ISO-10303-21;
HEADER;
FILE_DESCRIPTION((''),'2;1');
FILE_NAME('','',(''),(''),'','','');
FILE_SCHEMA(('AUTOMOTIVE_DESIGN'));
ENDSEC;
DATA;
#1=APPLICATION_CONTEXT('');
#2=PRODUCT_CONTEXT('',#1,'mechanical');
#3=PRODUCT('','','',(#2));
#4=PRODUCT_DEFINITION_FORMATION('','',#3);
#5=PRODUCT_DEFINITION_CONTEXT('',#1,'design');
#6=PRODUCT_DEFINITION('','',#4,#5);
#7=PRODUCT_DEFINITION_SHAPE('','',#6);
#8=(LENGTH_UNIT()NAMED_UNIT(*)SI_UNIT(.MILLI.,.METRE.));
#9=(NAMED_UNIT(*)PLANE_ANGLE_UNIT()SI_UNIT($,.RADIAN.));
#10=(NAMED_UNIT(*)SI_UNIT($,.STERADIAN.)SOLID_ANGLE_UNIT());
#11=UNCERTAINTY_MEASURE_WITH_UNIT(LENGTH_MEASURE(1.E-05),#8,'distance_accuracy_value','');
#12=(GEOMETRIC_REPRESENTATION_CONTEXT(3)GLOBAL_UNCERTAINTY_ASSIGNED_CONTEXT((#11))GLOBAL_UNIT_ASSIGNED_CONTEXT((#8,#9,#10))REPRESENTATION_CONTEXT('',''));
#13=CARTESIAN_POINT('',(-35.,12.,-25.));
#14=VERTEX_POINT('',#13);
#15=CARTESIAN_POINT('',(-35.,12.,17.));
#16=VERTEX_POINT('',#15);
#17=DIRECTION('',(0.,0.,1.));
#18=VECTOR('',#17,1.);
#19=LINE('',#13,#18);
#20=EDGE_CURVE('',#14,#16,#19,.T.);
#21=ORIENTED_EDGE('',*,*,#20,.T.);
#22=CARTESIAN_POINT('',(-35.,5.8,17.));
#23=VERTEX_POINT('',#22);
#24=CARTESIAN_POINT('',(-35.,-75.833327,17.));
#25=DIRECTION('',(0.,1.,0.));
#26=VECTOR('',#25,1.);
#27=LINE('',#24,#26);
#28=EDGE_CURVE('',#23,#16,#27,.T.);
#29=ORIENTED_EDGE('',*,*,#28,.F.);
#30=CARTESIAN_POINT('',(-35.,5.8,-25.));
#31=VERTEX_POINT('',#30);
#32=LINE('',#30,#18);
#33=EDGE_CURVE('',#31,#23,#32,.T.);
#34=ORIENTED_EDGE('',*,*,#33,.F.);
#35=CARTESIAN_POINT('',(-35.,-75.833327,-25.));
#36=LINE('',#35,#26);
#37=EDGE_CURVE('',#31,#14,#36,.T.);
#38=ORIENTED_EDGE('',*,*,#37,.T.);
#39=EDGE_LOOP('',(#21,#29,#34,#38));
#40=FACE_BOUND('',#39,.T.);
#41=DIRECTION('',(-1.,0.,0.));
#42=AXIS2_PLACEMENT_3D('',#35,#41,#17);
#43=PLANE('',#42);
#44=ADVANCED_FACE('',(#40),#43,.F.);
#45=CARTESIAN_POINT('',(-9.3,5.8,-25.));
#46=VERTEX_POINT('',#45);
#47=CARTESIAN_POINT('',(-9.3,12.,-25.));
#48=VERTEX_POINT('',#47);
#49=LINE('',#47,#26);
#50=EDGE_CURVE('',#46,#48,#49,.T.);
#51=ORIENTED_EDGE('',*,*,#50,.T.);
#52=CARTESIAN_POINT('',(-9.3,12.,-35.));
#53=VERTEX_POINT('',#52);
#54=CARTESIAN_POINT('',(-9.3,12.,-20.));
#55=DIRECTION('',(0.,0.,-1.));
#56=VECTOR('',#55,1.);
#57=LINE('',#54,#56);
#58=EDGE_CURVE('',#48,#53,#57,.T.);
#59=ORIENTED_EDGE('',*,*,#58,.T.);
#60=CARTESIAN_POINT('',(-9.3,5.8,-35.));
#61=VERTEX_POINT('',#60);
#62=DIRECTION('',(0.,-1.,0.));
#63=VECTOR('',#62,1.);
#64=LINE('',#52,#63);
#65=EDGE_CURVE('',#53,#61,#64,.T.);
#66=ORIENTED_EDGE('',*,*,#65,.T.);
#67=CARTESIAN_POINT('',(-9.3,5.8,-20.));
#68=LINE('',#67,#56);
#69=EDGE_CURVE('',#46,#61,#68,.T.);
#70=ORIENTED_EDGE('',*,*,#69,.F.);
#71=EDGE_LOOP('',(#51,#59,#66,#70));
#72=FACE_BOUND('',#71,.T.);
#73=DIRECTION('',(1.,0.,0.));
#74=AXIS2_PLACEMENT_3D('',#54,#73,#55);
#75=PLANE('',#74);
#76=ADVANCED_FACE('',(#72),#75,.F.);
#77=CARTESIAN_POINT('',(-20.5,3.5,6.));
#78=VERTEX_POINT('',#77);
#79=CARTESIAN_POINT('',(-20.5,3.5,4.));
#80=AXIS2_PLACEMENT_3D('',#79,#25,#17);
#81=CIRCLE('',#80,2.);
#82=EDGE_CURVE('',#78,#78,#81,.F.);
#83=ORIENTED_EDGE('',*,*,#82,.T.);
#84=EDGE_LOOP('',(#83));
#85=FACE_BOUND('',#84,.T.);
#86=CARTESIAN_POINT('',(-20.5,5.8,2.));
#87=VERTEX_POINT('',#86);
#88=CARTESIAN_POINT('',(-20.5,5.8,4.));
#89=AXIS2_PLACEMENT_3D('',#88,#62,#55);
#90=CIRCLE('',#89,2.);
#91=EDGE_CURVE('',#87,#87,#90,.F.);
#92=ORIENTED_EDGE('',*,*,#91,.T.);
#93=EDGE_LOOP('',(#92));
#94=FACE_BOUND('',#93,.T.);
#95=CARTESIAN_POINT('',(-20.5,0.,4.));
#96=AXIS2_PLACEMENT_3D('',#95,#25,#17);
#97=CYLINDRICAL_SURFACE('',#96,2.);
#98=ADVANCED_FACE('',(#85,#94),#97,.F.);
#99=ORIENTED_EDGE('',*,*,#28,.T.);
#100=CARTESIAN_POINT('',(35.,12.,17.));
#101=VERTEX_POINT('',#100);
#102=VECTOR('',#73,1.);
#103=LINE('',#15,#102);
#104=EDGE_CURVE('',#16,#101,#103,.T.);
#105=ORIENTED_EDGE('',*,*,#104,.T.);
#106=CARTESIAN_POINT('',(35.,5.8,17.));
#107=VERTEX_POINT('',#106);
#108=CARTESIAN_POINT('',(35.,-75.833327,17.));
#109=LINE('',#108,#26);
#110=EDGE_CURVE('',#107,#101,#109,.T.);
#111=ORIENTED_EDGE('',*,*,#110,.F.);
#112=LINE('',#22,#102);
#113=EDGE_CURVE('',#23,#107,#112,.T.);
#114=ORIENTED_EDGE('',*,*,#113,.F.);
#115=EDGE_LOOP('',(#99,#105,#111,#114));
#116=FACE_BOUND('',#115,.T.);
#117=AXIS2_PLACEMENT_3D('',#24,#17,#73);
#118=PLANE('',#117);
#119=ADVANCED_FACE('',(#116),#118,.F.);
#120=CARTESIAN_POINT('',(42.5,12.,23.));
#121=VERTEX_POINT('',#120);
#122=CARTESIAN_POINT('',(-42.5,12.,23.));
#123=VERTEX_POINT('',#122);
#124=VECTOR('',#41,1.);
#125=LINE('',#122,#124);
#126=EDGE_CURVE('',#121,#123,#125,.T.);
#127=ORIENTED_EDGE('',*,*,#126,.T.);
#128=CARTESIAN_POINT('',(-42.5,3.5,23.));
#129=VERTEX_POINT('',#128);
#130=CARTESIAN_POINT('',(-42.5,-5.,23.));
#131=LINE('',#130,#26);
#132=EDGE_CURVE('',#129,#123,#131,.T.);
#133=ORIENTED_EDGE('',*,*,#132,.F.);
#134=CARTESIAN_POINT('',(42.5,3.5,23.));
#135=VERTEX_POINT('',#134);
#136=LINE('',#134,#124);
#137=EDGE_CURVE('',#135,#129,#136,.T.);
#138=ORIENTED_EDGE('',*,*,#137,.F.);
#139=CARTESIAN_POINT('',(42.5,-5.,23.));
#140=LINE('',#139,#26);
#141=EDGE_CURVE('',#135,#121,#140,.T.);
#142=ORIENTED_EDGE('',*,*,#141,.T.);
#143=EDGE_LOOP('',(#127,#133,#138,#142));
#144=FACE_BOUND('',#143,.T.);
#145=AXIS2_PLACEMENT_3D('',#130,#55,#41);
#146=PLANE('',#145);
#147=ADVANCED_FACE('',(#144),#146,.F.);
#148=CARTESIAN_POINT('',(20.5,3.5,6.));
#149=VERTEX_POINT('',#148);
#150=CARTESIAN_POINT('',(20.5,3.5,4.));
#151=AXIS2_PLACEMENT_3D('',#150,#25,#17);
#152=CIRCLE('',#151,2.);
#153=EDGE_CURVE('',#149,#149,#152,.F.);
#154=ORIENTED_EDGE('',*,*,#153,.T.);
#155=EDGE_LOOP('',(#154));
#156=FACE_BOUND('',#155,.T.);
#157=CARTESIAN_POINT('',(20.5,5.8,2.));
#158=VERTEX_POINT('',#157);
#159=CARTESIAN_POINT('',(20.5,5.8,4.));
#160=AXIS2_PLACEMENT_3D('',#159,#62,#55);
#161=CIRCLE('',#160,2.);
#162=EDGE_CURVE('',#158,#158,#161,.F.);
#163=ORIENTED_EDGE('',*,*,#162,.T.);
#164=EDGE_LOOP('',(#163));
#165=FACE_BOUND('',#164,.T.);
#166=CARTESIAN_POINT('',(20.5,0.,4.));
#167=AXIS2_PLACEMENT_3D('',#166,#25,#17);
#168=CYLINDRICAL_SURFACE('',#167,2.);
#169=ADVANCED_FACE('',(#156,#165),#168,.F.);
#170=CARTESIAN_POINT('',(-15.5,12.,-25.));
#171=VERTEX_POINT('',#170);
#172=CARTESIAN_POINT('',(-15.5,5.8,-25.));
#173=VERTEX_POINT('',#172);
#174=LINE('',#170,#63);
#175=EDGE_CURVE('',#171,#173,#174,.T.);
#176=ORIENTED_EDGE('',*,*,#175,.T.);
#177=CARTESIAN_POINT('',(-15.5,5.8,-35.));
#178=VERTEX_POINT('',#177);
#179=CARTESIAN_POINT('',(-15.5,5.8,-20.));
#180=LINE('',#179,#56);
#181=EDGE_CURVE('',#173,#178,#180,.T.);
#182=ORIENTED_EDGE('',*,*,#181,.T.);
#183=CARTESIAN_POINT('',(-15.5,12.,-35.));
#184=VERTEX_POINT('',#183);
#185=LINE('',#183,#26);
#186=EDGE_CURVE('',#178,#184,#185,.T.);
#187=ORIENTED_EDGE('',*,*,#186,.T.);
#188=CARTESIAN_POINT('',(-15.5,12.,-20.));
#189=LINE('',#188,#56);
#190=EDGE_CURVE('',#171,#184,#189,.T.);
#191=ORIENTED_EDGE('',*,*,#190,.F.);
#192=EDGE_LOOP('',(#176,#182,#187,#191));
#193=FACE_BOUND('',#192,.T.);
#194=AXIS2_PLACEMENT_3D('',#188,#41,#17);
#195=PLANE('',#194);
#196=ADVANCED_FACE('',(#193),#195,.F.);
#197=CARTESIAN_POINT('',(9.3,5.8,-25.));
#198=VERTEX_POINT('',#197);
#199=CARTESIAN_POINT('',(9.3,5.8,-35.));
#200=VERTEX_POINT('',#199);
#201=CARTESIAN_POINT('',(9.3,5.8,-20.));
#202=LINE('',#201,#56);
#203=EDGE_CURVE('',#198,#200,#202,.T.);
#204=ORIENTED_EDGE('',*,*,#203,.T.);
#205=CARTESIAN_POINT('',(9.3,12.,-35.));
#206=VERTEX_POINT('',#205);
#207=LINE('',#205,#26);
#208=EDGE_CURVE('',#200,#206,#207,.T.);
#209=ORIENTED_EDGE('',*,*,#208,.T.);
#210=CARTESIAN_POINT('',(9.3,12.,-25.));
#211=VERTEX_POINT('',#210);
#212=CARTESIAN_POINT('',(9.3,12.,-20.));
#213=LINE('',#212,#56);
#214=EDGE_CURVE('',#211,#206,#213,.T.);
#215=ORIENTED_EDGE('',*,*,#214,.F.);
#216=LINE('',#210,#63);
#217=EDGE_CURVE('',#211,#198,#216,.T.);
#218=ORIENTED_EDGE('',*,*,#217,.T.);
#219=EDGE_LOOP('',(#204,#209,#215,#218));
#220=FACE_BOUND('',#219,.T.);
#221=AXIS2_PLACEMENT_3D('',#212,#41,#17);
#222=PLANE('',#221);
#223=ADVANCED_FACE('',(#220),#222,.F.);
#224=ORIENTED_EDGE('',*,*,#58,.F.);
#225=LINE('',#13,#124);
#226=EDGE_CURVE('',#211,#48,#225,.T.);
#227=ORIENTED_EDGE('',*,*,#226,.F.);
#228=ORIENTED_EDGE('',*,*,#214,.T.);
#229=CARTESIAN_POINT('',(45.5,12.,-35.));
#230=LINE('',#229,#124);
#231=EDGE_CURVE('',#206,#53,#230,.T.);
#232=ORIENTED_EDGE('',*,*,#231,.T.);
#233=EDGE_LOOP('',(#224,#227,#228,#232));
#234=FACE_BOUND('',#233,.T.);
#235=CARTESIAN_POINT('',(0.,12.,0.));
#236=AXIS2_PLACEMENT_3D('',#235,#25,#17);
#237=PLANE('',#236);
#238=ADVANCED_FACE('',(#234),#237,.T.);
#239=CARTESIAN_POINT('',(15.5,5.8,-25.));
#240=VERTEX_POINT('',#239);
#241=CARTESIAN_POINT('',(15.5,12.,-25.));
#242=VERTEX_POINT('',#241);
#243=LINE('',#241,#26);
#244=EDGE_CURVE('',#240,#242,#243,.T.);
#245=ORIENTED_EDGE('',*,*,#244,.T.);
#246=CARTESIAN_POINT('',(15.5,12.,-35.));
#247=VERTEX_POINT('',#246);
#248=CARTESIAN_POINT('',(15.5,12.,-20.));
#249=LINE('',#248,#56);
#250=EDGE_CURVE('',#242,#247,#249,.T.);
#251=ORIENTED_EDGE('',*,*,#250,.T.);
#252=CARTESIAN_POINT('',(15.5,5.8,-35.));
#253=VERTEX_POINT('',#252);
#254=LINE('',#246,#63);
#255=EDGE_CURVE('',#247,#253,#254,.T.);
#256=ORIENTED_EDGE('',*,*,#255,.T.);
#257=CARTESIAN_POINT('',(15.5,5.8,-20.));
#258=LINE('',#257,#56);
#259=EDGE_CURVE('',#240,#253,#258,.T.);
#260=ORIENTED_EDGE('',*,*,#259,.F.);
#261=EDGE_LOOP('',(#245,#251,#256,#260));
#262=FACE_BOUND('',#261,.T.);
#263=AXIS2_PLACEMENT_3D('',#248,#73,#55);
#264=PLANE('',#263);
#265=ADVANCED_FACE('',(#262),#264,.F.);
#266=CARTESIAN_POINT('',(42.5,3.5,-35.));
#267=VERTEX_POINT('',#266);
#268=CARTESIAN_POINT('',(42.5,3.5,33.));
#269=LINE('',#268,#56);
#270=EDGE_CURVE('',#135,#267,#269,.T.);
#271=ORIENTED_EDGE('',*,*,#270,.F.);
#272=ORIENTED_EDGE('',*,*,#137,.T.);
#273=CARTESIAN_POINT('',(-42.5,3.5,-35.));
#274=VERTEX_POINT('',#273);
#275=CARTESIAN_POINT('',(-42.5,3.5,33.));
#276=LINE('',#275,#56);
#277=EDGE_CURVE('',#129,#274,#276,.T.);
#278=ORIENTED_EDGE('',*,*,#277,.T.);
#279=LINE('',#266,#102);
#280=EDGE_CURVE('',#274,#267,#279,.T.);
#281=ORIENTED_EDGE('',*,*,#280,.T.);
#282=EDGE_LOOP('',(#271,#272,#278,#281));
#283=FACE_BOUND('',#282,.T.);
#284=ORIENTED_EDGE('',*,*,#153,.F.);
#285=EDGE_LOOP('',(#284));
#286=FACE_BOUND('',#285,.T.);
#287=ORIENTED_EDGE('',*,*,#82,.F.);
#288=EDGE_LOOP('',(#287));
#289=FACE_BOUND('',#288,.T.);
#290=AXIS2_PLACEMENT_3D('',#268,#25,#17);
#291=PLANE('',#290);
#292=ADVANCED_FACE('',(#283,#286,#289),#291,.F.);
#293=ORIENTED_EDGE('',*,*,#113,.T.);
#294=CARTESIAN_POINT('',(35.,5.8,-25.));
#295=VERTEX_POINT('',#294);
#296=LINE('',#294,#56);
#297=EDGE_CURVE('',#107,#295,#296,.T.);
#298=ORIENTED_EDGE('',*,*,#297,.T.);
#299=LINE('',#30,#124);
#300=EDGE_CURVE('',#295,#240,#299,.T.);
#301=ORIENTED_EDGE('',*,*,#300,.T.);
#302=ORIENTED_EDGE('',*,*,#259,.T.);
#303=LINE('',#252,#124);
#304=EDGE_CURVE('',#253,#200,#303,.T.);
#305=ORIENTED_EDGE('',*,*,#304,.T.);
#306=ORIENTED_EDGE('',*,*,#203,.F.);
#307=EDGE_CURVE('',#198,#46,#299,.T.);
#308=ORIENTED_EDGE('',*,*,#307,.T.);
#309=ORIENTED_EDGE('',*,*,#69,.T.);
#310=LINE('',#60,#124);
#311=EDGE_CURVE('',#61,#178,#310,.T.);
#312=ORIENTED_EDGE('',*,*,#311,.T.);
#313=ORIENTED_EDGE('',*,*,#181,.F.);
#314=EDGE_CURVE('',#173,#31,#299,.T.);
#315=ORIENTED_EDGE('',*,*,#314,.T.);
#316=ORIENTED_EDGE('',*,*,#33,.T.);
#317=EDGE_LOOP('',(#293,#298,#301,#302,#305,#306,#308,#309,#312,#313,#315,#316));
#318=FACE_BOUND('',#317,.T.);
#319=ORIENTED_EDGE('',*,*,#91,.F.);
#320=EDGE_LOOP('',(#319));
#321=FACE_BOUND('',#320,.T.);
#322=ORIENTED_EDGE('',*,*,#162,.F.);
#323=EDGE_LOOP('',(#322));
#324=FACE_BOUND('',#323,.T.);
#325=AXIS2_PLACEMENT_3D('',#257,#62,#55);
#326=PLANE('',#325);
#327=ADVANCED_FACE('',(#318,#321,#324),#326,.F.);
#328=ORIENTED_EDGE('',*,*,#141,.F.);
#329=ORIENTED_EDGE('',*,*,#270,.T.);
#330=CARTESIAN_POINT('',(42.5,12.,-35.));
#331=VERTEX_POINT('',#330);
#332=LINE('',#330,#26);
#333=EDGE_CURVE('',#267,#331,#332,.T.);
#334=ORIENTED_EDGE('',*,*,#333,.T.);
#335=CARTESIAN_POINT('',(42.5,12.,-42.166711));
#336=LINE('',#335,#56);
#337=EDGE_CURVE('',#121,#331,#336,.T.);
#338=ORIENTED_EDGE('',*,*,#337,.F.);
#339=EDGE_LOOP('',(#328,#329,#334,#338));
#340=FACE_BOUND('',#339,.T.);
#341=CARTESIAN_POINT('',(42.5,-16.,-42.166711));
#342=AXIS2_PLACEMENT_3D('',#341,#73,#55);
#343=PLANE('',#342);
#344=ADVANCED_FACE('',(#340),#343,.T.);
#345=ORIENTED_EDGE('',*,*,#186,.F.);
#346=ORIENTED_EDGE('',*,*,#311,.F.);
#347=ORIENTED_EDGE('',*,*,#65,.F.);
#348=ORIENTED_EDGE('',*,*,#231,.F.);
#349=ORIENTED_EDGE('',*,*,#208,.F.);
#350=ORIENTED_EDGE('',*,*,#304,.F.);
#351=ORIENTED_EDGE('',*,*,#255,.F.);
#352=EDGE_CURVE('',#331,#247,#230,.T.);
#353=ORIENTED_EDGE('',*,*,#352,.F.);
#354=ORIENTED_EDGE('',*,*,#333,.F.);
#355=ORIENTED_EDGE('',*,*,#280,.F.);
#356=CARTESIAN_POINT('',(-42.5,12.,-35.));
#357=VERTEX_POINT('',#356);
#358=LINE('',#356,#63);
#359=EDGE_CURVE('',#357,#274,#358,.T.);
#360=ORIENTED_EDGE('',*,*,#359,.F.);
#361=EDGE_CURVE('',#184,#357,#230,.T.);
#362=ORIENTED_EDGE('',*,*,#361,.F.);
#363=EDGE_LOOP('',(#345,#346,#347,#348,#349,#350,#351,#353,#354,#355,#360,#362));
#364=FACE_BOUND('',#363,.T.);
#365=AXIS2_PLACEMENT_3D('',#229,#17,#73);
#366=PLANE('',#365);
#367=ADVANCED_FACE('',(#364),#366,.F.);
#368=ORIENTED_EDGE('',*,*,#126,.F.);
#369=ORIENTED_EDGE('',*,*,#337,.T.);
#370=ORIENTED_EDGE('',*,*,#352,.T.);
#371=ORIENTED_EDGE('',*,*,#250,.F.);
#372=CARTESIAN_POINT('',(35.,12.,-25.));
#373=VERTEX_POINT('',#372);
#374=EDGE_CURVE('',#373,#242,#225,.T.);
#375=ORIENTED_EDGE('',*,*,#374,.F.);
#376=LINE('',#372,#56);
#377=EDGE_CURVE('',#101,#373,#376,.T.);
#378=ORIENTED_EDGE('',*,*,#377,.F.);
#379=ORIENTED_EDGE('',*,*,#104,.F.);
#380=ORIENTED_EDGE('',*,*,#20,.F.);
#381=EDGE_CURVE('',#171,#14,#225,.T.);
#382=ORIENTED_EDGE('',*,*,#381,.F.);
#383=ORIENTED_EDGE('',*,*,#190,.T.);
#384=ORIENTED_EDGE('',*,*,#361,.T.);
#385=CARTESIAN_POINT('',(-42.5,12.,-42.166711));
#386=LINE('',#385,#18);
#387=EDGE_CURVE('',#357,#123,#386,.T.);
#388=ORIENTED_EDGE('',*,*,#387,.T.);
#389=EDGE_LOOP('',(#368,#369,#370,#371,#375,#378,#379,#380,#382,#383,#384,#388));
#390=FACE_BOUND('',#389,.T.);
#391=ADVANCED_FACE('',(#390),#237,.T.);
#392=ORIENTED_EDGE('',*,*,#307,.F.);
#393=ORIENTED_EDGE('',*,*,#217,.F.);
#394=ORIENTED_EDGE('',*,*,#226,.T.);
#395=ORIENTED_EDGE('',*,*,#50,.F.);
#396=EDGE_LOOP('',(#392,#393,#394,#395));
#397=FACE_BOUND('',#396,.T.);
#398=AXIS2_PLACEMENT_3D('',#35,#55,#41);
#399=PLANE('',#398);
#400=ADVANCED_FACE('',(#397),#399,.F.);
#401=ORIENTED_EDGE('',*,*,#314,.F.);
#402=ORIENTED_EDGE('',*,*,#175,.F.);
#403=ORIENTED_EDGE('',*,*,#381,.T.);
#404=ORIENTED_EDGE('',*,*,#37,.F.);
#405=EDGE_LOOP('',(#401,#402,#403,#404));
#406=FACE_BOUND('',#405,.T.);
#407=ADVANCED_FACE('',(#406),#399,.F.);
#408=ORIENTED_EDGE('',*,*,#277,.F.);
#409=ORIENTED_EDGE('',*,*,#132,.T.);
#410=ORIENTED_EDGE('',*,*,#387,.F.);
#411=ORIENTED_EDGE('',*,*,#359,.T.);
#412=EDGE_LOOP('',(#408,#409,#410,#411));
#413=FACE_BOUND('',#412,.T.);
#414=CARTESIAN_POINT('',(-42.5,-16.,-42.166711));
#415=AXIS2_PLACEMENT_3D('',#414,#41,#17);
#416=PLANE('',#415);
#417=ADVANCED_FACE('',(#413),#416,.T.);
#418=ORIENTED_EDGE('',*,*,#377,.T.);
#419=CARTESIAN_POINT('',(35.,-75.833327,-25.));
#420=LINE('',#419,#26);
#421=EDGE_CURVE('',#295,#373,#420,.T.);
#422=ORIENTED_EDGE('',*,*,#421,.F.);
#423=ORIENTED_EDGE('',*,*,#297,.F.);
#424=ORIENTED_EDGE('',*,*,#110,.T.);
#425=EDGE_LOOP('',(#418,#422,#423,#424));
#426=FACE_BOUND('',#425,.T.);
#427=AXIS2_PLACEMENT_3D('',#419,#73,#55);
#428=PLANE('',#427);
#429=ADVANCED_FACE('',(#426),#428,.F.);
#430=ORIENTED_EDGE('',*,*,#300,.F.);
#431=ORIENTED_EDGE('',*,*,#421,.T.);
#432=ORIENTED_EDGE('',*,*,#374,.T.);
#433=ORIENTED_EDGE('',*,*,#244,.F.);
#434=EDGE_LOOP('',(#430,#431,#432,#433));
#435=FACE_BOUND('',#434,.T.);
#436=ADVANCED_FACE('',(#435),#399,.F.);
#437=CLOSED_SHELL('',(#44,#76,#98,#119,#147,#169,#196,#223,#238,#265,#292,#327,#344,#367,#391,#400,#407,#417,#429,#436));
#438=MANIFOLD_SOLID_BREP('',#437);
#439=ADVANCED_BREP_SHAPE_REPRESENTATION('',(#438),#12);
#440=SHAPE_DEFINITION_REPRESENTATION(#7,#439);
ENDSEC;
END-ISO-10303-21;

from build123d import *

# Parameters (mm, degrees)
SKETCH1_W           = 91
SKETCH1_H           = 70
BOSS_EXTRUDE1_DEPTH = 12
SKETCH2_R           = 2
CUT_EXTRUDE1_DEPTH  = 59.645119149
SKETCH4_W           = 6.2
SKETCH4_H           = 6.2
CUT_EXTRUDE2_DEPTH  = 15
SKETCH5_W           = 70
SKETCH5_H           = 42
CUT_EXTRUDE3_DEPTH  = 6.2
SKETCH6_W           = 109.081458423
SKETCH6_H           = 97.427456455
SKETCH6_W_2         = 85
SKETCH6_H_2         = 75.166710869
CUT_EXTRUDE4_DEPTH  = 28
SKETCH7_W           = 85
SKETCH7_H           = 3.5
CUT_EXTRUDE5_DEPTH  = 82.081748871
FILLET3_R           = 10
SKETCH8_W           = 85
SKETCH8_H           = 10
CUT_EXTRUDE7_DEPTH  = 17


with BuildPart() as part:
    # Sketch1 → Boss-Extrude1 (new body)
    with BuildSketch(Plane(origin=(0, 0, 0), x_dir=(1, 0, 0), z_dir=(0, 1, 0))):
        Rectangle(SKETCH1_W, SKETCH1_H)
    extrude(amount=BOSS_EXTRUDE1_DEPTH)

    # Sketch2 → Cut-Extrude1 (cut, through all)
    with BuildSketch(Plane(origin=(0, 12, 0), x_dir=(1, 0, 0), z_dir=(0, 1, 0))):
        with Locations(Location((-20.5, -4, 0), (0, 0, 270))):
            Circle(SKETCH2_R)
        with Locations(Location((20.5, -4, 0), (0, 0, 270))):
            Circle(SKETCH2_R)
    extrude(amount=-CUT_EXTRUDE1_DEPTH, mode=Mode.SUBTRACT)

    # Sketch4 → Cut-Extrude2 (cut)
    with BuildSketch(Plane(origin=(0, 0, -35), x_dir=(-1, 0, 0), z_dir=(0, 0, -1))):
        with Locations((-12.4, 8.9)):
            Rectangle(SKETCH4_W, SKETCH4_H)
        with Locations((12.4, 8.9)):
            Rectangle(SKETCH4_W, SKETCH4_H)
    extrude(amount=-CUT_EXTRUDE2_DEPTH, mode=Mode.SUBTRACT)

    # Sketch5 → Cut-Extrude3 (cut)
    with BuildSketch(Plane(origin=(0, 12, 0), x_dir=(1, 0, 0), z_dir=(0, 1, 0))):
        with Locations((0, 4)):
            Rectangle(SKETCH5_W, SKETCH5_H)
    extrude(amount=-CUT_EXTRUDE3_DEPTH, mode=Mode.SUBTRACT)

    # Sketch6 → Cut-Extrude4 (cut)
    with BuildSketch(Plane(origin=(0, 12, 0), x_dir=(1, 0, 0), z_dir=(0, 1, 0))):
        with Locations((-1.57183243, 4.07575105)):
            Rectangle(SKETCH6_W, SKETCH6_H)
        with Locations((0, 4.583355434)):
            Rectangle(SKETCH6_W_2, SKETCH6_H_2, mode=Mode.SUBTRACT)
    extrude(amount=-CUT_EXTRUDE4_DEPTH, mode=Mode.SUBTRACT)

    # Sketch7 → Cut-Extrude5 (cut, through all)
    with BuildSketch(Plane(origin=(0, 0, -35), x_dir=(-1, 0, 0), z_dir=(0, 0, -1))):
        with Locations((0, 1.75)):
            Rectangle(SKETCH7_W, SKETCH7_H)
    extrude(amount=-CUT_EXTRUDE5_DEPTH, mode=Mode.SUBTRACT)

    # Fillet3
    # the kernel refuses this fillet: 10 mm, written as the material it takes off along each edge
    with BuildSketch(Plane(origin=(-67.217149917, 3.5, 33), x_dir=(0, 0, -1), z_dir=(1, 0, 0))) as fillet3_piece_1:
        with BuildLine():
            CenterArc((9.886859967, 10), FILLET3_R, 188.626926559, 81.373073441)
            Line((0, 8.5), (-0.197737199, 8.47))
            ThreePointArc((-0.197737199, 8.47), (-0.2, 4.25), (-0.2, 0))
            Line((-0.2, 0), (0, -0.2))
            Line((0, -0.2), (9.886859967, -0.2))
            Line((9.886859967, -0.2), (9.886859967, 0))
        make_face()
    extrude(amount=134.434299833, mode=Mode.SUBTRACT)

    # Sketch8 → Cut-Extrude7 (cut)
    with BuildSketch(Plane(origin=(0, 12, 0), x_dir=(1, 0, 0), z_dir=(0, 1, 0))):
        with Locations((0, -28)):
            Rectangle(SKETCH8_W, SKETCH8_H)
    extrude(amount=-CUT_EXTRUDE7_DEPTH, mode=Mode.SUBTRACT)


solid = part.part
